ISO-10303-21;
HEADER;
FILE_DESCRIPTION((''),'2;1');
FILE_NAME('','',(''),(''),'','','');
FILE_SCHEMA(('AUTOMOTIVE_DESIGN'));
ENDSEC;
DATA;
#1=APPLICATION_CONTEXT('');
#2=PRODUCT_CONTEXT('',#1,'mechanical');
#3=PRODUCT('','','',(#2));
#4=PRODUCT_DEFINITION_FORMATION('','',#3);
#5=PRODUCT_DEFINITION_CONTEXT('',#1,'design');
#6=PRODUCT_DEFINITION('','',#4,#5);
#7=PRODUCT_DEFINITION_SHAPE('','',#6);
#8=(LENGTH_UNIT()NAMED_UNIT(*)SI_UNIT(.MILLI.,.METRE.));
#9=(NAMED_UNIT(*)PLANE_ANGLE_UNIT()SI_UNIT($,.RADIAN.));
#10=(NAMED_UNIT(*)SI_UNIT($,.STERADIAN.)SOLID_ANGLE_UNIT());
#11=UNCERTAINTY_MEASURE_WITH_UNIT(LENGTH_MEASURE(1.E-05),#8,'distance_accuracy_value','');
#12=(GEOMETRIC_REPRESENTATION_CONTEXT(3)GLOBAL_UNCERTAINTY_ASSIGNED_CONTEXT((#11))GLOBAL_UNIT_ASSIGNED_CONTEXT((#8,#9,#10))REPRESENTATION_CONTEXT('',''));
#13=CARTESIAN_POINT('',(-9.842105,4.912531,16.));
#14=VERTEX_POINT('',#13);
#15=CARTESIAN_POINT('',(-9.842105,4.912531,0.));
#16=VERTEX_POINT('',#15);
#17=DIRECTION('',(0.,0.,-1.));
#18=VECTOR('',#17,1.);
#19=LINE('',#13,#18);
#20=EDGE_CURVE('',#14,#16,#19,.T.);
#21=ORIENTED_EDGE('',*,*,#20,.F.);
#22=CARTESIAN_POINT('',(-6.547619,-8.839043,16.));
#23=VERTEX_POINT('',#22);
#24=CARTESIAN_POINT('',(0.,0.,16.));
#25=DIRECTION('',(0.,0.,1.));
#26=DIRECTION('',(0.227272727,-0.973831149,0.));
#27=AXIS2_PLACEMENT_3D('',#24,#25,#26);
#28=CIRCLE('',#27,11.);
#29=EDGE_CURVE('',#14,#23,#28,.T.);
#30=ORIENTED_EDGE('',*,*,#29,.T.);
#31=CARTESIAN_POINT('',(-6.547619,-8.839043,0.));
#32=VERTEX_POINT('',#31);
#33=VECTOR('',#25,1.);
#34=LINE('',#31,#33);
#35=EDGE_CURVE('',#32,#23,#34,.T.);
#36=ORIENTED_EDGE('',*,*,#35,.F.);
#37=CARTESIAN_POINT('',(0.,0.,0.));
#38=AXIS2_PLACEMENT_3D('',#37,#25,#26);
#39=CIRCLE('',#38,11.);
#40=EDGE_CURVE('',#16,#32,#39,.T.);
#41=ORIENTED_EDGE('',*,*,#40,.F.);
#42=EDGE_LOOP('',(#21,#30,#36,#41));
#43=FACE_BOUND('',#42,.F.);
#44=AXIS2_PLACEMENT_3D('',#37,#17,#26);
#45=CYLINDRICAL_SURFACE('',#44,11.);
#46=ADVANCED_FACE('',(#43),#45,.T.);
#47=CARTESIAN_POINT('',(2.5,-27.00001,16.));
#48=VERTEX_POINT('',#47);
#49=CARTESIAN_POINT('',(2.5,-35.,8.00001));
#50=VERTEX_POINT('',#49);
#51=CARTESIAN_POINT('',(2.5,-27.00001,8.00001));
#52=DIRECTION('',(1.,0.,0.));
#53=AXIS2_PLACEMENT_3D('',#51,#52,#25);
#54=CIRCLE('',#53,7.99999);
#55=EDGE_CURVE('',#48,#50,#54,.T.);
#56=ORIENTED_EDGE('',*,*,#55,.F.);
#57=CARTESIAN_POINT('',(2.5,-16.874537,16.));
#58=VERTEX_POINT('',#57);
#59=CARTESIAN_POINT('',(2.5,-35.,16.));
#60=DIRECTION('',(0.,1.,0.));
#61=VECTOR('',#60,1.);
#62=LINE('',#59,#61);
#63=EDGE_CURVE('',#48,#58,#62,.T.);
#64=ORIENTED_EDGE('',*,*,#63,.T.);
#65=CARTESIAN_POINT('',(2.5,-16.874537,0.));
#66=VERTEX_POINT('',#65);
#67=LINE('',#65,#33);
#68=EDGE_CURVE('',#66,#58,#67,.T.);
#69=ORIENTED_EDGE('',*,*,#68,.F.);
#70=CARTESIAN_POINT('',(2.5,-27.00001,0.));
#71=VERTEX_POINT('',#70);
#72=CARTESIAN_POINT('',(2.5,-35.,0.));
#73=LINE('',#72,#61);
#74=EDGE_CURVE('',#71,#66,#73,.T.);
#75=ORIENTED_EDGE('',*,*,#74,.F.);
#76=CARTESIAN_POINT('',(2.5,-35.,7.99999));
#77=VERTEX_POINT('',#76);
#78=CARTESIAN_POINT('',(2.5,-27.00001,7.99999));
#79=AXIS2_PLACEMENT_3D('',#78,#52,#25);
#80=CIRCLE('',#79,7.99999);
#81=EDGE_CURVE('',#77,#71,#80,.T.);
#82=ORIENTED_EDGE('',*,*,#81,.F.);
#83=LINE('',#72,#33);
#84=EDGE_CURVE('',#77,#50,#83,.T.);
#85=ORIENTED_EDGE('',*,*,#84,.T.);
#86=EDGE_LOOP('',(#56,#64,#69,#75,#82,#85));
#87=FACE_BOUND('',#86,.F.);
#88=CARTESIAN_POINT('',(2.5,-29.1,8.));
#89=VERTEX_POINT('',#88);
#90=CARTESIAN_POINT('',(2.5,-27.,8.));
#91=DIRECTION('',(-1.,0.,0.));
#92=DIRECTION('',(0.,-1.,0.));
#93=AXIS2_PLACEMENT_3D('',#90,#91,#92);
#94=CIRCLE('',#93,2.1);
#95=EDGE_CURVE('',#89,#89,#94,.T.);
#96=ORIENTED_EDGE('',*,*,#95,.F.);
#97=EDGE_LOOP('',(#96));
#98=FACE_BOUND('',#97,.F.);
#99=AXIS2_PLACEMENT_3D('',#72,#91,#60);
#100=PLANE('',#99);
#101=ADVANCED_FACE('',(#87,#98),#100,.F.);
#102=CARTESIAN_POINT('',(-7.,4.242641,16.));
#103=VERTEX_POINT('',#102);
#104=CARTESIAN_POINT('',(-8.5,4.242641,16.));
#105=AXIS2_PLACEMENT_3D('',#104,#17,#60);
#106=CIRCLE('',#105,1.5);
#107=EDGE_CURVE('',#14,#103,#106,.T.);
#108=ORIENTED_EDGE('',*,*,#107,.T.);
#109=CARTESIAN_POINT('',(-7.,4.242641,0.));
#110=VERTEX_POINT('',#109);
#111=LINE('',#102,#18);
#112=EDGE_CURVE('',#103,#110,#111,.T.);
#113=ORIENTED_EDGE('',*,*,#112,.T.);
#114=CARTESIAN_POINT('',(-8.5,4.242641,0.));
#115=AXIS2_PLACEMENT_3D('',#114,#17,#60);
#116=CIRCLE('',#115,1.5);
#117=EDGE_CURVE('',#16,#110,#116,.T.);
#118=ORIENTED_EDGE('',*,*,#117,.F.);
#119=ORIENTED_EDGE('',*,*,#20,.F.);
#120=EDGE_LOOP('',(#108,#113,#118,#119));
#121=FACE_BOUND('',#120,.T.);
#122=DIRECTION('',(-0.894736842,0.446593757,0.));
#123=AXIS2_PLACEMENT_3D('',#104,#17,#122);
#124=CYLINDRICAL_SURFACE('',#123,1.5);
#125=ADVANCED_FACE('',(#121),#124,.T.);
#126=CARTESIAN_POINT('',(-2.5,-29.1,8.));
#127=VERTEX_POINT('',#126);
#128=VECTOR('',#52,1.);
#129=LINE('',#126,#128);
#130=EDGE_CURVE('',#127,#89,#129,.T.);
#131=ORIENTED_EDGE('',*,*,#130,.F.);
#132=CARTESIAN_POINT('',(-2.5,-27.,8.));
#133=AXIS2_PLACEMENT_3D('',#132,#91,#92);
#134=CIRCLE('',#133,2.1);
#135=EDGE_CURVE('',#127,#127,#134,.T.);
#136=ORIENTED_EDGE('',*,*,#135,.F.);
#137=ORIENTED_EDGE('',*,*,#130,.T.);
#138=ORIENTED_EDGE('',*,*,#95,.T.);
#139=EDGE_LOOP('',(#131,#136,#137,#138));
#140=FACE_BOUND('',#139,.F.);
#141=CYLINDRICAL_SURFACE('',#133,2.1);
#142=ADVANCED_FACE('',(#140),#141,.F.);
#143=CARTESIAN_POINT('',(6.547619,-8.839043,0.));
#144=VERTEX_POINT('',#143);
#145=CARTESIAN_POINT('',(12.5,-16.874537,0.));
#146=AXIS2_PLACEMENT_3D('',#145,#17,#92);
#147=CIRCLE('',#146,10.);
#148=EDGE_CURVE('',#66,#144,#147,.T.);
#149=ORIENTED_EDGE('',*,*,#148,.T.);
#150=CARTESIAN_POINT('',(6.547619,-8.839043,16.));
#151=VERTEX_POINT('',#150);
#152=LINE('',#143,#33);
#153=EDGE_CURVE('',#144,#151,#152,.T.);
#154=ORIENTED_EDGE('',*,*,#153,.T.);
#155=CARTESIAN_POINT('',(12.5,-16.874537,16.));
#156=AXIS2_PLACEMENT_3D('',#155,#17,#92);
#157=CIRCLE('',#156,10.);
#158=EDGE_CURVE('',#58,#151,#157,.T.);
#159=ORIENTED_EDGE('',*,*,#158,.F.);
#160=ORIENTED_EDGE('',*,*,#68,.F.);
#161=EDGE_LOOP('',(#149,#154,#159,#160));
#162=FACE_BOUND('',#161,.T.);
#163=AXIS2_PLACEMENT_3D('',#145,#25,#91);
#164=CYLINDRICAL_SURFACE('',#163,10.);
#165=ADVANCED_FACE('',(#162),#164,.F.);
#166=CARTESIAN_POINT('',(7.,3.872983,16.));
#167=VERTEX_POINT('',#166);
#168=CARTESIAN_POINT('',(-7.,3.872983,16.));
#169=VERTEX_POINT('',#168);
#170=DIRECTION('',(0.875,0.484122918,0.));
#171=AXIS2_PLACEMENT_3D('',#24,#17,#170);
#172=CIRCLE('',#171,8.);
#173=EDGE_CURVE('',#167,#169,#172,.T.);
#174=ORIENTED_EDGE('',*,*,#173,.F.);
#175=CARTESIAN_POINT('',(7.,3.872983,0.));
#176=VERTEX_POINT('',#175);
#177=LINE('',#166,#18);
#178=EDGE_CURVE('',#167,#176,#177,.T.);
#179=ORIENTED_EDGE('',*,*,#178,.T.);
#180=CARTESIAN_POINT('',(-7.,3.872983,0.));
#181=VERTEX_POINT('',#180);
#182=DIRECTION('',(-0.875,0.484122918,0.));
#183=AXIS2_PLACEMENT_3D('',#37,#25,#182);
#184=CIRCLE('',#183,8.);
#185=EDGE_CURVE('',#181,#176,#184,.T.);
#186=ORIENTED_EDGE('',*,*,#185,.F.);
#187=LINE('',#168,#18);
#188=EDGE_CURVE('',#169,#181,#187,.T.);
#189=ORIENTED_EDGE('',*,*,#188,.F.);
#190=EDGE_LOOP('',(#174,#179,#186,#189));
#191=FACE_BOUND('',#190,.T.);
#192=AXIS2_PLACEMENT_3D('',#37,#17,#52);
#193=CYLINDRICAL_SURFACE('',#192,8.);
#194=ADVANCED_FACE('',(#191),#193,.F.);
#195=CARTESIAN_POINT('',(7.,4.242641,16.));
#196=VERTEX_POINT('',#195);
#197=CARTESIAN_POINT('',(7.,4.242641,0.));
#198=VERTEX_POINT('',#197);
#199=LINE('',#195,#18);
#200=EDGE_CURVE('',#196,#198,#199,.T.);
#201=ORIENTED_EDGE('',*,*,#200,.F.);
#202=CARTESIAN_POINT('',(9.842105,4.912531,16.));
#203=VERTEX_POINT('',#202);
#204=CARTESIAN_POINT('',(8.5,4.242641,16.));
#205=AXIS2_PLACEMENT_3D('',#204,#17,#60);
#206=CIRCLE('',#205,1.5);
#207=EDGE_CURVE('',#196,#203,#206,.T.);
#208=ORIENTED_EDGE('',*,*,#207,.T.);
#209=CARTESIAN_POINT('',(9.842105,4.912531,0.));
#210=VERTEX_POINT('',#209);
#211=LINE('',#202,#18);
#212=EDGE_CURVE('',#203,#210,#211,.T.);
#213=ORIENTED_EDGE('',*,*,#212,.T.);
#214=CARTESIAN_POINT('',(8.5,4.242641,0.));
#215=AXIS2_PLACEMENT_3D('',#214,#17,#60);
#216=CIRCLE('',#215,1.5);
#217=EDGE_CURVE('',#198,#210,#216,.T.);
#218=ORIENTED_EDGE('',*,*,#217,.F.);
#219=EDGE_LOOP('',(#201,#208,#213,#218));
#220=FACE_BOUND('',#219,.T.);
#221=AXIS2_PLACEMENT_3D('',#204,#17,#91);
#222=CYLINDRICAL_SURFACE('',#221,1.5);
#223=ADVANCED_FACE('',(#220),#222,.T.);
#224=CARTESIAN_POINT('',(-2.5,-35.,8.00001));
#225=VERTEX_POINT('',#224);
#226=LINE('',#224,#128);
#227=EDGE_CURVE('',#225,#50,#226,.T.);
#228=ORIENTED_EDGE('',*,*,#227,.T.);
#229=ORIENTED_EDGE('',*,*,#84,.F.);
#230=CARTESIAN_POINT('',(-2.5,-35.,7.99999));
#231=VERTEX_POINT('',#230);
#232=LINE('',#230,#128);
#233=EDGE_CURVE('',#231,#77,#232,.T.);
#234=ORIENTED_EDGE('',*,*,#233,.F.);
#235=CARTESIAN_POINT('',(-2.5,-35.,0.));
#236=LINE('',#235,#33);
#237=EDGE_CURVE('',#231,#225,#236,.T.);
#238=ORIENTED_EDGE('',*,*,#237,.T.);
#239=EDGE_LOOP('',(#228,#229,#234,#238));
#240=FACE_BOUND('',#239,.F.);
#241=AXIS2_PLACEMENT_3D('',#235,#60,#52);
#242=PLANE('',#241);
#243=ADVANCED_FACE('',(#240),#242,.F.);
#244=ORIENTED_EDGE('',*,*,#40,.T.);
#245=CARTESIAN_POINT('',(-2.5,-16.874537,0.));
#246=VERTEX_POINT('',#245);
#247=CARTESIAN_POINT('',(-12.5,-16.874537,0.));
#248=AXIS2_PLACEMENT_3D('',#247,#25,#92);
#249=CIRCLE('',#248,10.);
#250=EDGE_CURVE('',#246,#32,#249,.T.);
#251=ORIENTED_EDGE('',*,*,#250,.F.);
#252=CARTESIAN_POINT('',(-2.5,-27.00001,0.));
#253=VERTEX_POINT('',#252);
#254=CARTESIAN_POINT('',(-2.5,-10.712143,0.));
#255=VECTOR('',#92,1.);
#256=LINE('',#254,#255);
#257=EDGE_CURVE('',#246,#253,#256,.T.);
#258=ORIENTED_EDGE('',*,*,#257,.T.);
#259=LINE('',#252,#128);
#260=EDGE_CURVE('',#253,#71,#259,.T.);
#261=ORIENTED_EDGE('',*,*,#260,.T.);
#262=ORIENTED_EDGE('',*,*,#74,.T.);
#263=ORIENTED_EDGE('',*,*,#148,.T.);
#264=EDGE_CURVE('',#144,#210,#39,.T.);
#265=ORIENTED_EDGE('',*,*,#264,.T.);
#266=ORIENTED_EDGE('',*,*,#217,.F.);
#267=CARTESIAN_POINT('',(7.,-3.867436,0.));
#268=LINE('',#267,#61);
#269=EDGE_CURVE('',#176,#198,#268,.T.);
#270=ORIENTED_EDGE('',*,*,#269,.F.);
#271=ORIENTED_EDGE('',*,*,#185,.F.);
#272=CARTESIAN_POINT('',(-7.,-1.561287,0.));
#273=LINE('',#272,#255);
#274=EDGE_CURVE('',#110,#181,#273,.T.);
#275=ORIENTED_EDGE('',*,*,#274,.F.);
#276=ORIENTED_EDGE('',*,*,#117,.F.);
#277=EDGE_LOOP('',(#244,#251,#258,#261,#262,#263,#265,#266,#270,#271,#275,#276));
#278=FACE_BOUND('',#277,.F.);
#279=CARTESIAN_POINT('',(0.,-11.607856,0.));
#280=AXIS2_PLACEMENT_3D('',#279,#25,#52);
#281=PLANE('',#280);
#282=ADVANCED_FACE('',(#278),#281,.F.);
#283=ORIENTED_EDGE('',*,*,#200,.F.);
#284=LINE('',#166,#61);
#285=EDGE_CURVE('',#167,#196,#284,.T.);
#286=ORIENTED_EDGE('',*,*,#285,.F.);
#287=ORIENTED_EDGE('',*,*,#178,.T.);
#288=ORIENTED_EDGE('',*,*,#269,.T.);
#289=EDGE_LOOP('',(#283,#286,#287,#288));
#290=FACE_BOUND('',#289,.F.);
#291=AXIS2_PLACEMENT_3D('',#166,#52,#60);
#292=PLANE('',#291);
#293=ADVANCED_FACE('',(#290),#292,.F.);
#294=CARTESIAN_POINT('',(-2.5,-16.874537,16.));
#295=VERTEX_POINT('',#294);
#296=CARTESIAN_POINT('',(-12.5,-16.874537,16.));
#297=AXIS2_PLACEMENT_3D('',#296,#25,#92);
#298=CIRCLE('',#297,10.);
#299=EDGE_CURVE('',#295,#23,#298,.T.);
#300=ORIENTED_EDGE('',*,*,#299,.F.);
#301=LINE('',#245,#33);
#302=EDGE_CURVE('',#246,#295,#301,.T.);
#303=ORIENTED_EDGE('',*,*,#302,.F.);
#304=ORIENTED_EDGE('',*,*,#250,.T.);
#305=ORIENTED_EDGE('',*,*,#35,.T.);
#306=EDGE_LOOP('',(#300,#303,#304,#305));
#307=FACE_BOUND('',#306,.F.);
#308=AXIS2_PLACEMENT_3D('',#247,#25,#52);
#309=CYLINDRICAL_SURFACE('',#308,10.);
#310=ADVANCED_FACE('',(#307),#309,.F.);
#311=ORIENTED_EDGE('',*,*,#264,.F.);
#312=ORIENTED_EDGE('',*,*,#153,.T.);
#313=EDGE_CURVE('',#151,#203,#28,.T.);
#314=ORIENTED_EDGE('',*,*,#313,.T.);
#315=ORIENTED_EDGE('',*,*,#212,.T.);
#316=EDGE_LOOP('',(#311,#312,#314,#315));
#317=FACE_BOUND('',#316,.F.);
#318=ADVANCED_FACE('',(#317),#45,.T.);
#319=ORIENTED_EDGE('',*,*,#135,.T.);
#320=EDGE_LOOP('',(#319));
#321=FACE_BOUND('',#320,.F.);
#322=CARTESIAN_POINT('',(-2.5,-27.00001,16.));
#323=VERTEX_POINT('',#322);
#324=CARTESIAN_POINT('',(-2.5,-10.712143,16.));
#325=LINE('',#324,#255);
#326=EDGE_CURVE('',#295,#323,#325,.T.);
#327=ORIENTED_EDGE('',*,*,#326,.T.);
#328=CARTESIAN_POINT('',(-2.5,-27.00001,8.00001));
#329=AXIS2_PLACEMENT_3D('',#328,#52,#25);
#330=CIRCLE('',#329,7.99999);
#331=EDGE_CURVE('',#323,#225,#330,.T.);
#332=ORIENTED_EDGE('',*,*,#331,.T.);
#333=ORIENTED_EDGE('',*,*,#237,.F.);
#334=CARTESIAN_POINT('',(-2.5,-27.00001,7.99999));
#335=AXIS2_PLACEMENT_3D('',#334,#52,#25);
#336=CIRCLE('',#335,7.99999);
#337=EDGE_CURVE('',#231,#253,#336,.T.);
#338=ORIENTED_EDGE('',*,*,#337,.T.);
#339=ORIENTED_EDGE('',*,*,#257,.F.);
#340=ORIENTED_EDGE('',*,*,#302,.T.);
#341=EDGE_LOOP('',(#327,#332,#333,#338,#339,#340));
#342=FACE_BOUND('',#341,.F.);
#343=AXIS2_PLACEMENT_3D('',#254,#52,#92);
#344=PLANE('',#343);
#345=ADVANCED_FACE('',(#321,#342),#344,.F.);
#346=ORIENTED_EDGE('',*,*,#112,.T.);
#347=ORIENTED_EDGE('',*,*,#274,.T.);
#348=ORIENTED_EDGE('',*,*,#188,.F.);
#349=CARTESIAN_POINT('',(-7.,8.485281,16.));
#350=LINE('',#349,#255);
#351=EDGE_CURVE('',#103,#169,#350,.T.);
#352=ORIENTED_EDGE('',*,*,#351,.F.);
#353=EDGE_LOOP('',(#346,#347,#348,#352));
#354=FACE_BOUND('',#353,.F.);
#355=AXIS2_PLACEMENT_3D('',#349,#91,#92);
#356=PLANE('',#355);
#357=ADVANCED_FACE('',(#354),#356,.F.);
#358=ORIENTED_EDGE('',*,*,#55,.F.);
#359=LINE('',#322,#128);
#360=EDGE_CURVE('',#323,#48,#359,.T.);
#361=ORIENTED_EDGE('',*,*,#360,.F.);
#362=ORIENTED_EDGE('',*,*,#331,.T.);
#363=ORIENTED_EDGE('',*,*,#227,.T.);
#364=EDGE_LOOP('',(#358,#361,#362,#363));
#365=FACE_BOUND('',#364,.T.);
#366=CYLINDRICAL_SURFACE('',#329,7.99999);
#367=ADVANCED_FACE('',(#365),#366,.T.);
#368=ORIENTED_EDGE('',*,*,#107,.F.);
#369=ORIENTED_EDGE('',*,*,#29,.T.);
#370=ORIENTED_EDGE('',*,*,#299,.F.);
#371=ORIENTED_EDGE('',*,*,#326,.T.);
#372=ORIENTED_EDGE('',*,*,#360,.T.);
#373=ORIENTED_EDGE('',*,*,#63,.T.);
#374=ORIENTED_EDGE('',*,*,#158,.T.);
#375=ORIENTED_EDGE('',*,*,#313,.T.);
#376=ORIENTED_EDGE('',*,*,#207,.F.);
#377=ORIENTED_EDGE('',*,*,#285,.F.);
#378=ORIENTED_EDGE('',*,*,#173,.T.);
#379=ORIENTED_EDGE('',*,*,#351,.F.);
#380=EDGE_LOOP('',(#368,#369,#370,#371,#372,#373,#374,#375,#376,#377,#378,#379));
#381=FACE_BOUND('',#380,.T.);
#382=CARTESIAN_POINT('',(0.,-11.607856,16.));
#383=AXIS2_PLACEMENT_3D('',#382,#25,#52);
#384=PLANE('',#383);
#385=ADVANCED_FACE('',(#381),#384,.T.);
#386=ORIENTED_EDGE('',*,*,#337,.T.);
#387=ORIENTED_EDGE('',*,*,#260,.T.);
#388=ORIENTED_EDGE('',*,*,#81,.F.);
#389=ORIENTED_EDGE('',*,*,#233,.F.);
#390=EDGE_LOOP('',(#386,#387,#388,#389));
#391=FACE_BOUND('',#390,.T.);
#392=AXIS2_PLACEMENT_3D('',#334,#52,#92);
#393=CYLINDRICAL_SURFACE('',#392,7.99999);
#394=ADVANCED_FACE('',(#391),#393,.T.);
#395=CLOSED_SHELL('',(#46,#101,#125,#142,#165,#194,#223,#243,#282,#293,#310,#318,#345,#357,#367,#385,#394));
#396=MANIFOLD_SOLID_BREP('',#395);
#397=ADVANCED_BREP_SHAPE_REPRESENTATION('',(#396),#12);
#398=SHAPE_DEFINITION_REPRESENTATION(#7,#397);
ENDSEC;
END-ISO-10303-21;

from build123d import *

# Parameters (mm, degrees)
F0_R     = 8
F1_DEPTH = 16
F3_DEPTH = 25
F4_R     = 1.5
F5_R     = 7.99999
F6_R     = 10
F7_R     = 2.1
F8_DEPTH = 25


# Not quite as in the source:
# - a fillet or chamfer is up to 0.001 mm smaller than in the source, because OpenCascade refuses the exact size


with BuildPart() as f1:
    # F0 (on Top) → F1 (new body)
    with BuildSketch(Plane.XY):
        with BuildLine():
            Line((2.5, -35), (2.5, -10.7121426428))
            ThreePointArc((2.5, -10.7121426428), (0, 11), (-2.5, -10.7121426428))
            Line((-2.5, -10.7121426428), (-2.5, -35))
            Line((-2.5, -35), (2.5, -35))
        make_face()
        Circle(F0_R, mode=Mode.SUBTRACT)
    extrude(amount=F1_DEPTH)

    # F2 (on face) → F3 (cut)
    with BuildSketch(Plane.XY.offset(16)):
        with BuildLine():
            ThreePointArc((-7, 3.8729833462), (0, 8), (7, 3.8729833462))
            Line((7, 3.8729833462), (7, 8.4852813742))
            ThreePointArc((7, 8.4852813742), (0, 11), (-7, 8.4852813742))
            Line((-7, 8.4852813742), (-7, 3.8729833462))
        make_face()
    extrude(amount=-F3_DEPTH, mode=Mode.SUBTRACT)

    # F4
    f4_edges = [f1.edges().sort_by_distance(p)[0] for p in [
        (-7, 8.485281, 8),
        (7, 8.485281, 8),
    ]]
    fillet(f4_edges, radius=F4_R)

    # F5 (radius 8 in the source; OpenCascade refuses exactly that, so slightly less here)
    f5_edges = [f1.edges().sort_by_distance(p)[0] for p in [
        (0, -35, 16),
        (0, -35, 0),
    ]]
    fillet(f5_edges, radius=F5_R)

    # F6
    f6_edges = [f1.edges().sort_by_distance(p)[0] for p in [
        (-2.5, -10.712143, 8),
        (2.5, -10.712143, 8),
    ]]
    fillet(f6_edges, radius=F6_R)

    # F7 (on face) → F8 (cut)
    with BuildSketch(Plane(origin=(-2.5, 0, 0), x_dir=(0, -1, 0), z_dir=(-1, 0, 0))):
        with Locations((27, 8)):
            Circle(F7_R)
    extrude(amount=-F8_DEPTH, mode=Mode.SUBTRACT)


solid = f1.part
